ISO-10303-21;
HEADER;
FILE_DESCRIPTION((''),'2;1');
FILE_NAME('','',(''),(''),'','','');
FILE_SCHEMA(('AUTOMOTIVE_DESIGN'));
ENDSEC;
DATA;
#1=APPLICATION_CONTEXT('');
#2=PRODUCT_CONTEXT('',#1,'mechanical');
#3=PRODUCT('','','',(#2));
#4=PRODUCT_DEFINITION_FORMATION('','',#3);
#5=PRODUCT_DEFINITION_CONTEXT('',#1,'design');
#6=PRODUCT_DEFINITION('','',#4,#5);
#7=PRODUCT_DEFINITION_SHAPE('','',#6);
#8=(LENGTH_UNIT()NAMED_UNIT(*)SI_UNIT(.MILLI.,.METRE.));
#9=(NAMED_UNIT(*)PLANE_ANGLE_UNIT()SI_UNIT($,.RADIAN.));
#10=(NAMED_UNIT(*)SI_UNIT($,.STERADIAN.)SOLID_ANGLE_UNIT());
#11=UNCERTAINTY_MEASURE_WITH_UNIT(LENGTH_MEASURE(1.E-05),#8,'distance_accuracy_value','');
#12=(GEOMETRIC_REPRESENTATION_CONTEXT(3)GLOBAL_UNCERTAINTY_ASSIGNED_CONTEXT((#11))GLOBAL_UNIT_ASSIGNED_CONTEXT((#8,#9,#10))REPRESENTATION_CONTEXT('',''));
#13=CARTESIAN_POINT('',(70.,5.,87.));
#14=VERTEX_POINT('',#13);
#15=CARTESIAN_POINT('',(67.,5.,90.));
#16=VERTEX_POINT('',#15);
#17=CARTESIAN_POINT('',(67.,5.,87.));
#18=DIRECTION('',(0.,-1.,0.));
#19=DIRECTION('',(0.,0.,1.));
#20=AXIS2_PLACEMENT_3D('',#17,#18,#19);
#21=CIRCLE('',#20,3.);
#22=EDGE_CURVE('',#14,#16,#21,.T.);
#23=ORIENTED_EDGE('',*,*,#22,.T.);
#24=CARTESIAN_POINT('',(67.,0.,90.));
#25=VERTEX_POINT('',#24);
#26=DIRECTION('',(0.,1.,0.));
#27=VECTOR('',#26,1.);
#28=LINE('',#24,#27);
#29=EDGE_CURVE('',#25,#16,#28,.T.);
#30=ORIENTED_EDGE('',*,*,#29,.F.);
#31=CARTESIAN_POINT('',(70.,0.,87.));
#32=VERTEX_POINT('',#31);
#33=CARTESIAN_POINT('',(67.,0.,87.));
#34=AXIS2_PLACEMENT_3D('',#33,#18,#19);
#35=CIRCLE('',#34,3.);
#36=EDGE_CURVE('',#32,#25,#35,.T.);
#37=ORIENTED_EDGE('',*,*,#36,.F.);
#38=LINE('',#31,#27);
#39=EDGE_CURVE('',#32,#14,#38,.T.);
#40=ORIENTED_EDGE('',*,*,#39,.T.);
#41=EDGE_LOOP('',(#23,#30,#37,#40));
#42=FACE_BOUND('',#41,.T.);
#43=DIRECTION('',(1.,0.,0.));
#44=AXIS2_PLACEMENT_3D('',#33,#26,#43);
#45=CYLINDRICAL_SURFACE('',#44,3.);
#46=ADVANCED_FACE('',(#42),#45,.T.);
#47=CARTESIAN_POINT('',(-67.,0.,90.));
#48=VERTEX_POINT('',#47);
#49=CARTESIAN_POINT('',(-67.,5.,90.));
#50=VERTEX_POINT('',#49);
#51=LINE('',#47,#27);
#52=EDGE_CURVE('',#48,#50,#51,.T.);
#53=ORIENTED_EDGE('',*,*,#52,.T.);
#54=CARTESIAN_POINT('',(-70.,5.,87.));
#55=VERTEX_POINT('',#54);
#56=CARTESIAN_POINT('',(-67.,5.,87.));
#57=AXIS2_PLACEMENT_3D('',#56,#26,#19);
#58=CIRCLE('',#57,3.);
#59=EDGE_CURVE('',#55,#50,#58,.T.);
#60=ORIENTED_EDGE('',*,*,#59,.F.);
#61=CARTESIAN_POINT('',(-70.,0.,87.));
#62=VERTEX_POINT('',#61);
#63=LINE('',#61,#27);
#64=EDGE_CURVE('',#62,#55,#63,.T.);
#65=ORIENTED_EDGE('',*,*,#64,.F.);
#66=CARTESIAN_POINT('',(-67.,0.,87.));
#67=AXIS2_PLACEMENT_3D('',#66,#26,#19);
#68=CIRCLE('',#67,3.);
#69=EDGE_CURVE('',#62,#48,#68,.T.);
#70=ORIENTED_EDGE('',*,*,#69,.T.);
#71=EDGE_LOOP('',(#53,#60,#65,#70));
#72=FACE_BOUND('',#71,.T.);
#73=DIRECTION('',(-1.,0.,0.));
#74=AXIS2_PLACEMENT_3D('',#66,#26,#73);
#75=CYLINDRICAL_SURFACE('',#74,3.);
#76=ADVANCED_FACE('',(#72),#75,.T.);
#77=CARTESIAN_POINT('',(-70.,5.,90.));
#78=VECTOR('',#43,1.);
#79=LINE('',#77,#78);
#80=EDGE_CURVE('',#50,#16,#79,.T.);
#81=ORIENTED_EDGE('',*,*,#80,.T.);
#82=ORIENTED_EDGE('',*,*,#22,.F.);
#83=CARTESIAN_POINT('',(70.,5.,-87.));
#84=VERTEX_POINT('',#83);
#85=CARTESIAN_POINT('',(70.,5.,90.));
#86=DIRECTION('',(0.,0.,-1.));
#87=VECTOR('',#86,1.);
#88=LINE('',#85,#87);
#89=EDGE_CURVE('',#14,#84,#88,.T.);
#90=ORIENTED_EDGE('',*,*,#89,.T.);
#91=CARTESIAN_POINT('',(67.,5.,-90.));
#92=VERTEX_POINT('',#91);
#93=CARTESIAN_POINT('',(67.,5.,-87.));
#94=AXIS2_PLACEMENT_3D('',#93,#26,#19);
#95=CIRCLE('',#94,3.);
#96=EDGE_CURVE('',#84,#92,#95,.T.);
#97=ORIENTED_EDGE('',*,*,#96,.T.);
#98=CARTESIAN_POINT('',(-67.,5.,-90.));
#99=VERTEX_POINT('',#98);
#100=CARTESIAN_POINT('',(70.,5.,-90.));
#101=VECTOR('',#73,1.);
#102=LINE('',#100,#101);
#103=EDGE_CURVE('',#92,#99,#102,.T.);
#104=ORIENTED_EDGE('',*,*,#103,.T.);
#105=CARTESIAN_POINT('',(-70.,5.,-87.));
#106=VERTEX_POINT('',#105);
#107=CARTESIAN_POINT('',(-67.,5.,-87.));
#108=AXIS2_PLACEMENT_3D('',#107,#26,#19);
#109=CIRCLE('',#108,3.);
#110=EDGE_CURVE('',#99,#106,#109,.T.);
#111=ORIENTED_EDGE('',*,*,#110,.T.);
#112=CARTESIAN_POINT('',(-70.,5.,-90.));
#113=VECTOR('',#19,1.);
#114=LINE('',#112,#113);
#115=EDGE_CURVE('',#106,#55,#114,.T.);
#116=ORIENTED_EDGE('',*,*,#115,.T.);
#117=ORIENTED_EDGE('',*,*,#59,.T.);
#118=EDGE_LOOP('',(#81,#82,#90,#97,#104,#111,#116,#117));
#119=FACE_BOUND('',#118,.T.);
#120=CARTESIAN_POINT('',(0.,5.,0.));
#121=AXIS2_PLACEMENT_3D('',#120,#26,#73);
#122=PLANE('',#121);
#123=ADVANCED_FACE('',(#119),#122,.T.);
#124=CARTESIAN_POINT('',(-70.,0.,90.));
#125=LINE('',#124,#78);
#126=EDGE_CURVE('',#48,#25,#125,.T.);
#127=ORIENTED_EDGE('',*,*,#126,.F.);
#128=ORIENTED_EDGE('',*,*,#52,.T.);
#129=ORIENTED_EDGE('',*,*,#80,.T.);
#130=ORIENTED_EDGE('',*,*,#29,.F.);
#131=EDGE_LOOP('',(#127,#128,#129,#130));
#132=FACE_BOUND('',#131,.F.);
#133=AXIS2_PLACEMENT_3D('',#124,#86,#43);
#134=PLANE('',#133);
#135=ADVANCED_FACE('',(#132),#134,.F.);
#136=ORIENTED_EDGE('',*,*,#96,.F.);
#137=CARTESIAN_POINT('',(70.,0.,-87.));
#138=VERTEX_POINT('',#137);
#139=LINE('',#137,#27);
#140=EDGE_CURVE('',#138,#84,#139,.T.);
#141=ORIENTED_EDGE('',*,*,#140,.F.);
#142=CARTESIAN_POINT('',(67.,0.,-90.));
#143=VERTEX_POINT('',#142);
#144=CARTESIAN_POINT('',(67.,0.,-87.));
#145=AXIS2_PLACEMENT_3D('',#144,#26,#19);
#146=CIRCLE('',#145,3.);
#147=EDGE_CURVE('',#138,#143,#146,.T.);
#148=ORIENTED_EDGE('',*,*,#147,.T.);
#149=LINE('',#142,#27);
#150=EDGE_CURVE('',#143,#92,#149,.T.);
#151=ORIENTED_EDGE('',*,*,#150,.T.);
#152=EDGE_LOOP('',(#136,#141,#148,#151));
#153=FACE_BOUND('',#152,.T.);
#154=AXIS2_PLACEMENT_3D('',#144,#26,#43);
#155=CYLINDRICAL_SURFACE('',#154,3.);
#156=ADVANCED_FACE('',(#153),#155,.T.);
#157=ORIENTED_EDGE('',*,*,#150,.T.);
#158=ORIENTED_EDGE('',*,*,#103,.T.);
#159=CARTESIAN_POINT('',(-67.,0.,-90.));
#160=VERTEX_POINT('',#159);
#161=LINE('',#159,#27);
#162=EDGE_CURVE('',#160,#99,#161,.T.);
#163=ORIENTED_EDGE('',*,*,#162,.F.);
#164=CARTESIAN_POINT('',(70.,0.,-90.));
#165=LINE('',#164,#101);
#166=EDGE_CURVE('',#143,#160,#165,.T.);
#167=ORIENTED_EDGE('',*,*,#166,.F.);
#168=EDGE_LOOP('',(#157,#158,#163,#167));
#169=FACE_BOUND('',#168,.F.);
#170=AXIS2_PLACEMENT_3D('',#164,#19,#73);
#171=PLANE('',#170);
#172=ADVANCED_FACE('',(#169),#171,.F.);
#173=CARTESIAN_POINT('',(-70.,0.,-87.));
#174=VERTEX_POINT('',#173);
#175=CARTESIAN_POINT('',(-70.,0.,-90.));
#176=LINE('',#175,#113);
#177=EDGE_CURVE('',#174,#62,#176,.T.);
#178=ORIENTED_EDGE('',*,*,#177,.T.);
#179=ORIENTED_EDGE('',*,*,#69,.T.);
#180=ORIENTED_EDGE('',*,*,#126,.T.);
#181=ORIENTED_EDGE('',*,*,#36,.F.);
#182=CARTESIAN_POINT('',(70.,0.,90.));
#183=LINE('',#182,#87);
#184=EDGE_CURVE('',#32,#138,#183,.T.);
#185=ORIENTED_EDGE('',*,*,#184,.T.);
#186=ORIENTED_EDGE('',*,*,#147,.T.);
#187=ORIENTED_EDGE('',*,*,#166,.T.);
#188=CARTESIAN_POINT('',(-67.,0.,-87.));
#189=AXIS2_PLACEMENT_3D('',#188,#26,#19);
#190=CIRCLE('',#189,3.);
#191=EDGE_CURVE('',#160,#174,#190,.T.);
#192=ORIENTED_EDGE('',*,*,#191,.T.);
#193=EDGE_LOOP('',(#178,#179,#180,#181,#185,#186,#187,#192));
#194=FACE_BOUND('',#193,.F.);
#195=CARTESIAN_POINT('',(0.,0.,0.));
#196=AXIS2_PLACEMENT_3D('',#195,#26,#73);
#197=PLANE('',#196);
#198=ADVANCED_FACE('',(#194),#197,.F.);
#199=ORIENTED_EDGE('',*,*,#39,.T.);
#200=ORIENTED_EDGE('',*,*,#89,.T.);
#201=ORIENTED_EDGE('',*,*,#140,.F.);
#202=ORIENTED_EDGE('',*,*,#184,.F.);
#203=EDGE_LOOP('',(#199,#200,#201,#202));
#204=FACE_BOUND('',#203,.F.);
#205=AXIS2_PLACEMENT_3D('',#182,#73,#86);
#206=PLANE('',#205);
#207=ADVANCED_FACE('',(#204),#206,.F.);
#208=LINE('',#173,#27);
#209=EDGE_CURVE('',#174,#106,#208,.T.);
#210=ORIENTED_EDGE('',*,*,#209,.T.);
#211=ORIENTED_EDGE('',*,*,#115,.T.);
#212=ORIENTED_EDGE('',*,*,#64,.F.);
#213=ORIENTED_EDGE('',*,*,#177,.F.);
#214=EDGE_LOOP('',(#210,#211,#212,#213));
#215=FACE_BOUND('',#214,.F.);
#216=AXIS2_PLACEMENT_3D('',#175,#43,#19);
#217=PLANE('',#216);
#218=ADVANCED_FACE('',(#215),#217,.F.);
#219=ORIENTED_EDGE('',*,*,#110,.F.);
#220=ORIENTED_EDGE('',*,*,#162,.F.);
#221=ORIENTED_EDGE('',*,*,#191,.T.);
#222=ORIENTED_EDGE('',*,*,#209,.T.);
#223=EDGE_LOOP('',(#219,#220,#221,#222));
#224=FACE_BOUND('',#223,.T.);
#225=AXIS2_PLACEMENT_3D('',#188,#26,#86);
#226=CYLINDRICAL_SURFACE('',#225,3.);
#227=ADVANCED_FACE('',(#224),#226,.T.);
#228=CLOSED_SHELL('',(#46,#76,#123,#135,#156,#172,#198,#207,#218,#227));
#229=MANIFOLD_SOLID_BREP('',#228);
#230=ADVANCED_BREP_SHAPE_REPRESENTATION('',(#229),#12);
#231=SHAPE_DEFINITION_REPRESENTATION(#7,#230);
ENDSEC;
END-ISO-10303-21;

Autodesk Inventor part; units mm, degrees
ref_plane "YZ Plane" through (0, 0, 0) normal (1, 0, 0) x (0, 1, 0)
ref_plane "XZ Plane" through (0, 0, 0) normal (0, 1, 0) x (-1, 0, 0)
ref_plane "XY Plane" through (0, 0, 0) normal (0, 0, 1) x (1, 0, 0)
sketch "Sketch1" plane through (0, 0, 0) normal (0, 1, 0) x (-1, 0, 0)
  line L0 (70, 90) -> (-70, 90)
  line L1 (-70, 90) -> (-70, -90)
  line L2 (-70, -90) -> (70, -90)
  line L3 (70, -90) -> (70, 90)
  line L4 (70, 90) -> (-70, -90) construction
  line L5 (-70, 90) -> (70, -90) construction
  point P0 (0, 0)
  dimension "d0" = 140
  dimension "d1" = 180
extrude "Extrusion1" add sketch "Sketch1" along normal blind 5
fillet "Face Fillet1" radius 3 1 edges at (70, 2.5, 90)
fillet "Face Fillet2" radius 3 1 edges at (70, 2.5, -90)
fillet "Face Fillet3" radius 3 1 edges at (-70, 2.5, -90)
fillet "Face Fillet4" radius 3 1 edges at (-70, 2.5, 90)
properties part number "ur3_base"
